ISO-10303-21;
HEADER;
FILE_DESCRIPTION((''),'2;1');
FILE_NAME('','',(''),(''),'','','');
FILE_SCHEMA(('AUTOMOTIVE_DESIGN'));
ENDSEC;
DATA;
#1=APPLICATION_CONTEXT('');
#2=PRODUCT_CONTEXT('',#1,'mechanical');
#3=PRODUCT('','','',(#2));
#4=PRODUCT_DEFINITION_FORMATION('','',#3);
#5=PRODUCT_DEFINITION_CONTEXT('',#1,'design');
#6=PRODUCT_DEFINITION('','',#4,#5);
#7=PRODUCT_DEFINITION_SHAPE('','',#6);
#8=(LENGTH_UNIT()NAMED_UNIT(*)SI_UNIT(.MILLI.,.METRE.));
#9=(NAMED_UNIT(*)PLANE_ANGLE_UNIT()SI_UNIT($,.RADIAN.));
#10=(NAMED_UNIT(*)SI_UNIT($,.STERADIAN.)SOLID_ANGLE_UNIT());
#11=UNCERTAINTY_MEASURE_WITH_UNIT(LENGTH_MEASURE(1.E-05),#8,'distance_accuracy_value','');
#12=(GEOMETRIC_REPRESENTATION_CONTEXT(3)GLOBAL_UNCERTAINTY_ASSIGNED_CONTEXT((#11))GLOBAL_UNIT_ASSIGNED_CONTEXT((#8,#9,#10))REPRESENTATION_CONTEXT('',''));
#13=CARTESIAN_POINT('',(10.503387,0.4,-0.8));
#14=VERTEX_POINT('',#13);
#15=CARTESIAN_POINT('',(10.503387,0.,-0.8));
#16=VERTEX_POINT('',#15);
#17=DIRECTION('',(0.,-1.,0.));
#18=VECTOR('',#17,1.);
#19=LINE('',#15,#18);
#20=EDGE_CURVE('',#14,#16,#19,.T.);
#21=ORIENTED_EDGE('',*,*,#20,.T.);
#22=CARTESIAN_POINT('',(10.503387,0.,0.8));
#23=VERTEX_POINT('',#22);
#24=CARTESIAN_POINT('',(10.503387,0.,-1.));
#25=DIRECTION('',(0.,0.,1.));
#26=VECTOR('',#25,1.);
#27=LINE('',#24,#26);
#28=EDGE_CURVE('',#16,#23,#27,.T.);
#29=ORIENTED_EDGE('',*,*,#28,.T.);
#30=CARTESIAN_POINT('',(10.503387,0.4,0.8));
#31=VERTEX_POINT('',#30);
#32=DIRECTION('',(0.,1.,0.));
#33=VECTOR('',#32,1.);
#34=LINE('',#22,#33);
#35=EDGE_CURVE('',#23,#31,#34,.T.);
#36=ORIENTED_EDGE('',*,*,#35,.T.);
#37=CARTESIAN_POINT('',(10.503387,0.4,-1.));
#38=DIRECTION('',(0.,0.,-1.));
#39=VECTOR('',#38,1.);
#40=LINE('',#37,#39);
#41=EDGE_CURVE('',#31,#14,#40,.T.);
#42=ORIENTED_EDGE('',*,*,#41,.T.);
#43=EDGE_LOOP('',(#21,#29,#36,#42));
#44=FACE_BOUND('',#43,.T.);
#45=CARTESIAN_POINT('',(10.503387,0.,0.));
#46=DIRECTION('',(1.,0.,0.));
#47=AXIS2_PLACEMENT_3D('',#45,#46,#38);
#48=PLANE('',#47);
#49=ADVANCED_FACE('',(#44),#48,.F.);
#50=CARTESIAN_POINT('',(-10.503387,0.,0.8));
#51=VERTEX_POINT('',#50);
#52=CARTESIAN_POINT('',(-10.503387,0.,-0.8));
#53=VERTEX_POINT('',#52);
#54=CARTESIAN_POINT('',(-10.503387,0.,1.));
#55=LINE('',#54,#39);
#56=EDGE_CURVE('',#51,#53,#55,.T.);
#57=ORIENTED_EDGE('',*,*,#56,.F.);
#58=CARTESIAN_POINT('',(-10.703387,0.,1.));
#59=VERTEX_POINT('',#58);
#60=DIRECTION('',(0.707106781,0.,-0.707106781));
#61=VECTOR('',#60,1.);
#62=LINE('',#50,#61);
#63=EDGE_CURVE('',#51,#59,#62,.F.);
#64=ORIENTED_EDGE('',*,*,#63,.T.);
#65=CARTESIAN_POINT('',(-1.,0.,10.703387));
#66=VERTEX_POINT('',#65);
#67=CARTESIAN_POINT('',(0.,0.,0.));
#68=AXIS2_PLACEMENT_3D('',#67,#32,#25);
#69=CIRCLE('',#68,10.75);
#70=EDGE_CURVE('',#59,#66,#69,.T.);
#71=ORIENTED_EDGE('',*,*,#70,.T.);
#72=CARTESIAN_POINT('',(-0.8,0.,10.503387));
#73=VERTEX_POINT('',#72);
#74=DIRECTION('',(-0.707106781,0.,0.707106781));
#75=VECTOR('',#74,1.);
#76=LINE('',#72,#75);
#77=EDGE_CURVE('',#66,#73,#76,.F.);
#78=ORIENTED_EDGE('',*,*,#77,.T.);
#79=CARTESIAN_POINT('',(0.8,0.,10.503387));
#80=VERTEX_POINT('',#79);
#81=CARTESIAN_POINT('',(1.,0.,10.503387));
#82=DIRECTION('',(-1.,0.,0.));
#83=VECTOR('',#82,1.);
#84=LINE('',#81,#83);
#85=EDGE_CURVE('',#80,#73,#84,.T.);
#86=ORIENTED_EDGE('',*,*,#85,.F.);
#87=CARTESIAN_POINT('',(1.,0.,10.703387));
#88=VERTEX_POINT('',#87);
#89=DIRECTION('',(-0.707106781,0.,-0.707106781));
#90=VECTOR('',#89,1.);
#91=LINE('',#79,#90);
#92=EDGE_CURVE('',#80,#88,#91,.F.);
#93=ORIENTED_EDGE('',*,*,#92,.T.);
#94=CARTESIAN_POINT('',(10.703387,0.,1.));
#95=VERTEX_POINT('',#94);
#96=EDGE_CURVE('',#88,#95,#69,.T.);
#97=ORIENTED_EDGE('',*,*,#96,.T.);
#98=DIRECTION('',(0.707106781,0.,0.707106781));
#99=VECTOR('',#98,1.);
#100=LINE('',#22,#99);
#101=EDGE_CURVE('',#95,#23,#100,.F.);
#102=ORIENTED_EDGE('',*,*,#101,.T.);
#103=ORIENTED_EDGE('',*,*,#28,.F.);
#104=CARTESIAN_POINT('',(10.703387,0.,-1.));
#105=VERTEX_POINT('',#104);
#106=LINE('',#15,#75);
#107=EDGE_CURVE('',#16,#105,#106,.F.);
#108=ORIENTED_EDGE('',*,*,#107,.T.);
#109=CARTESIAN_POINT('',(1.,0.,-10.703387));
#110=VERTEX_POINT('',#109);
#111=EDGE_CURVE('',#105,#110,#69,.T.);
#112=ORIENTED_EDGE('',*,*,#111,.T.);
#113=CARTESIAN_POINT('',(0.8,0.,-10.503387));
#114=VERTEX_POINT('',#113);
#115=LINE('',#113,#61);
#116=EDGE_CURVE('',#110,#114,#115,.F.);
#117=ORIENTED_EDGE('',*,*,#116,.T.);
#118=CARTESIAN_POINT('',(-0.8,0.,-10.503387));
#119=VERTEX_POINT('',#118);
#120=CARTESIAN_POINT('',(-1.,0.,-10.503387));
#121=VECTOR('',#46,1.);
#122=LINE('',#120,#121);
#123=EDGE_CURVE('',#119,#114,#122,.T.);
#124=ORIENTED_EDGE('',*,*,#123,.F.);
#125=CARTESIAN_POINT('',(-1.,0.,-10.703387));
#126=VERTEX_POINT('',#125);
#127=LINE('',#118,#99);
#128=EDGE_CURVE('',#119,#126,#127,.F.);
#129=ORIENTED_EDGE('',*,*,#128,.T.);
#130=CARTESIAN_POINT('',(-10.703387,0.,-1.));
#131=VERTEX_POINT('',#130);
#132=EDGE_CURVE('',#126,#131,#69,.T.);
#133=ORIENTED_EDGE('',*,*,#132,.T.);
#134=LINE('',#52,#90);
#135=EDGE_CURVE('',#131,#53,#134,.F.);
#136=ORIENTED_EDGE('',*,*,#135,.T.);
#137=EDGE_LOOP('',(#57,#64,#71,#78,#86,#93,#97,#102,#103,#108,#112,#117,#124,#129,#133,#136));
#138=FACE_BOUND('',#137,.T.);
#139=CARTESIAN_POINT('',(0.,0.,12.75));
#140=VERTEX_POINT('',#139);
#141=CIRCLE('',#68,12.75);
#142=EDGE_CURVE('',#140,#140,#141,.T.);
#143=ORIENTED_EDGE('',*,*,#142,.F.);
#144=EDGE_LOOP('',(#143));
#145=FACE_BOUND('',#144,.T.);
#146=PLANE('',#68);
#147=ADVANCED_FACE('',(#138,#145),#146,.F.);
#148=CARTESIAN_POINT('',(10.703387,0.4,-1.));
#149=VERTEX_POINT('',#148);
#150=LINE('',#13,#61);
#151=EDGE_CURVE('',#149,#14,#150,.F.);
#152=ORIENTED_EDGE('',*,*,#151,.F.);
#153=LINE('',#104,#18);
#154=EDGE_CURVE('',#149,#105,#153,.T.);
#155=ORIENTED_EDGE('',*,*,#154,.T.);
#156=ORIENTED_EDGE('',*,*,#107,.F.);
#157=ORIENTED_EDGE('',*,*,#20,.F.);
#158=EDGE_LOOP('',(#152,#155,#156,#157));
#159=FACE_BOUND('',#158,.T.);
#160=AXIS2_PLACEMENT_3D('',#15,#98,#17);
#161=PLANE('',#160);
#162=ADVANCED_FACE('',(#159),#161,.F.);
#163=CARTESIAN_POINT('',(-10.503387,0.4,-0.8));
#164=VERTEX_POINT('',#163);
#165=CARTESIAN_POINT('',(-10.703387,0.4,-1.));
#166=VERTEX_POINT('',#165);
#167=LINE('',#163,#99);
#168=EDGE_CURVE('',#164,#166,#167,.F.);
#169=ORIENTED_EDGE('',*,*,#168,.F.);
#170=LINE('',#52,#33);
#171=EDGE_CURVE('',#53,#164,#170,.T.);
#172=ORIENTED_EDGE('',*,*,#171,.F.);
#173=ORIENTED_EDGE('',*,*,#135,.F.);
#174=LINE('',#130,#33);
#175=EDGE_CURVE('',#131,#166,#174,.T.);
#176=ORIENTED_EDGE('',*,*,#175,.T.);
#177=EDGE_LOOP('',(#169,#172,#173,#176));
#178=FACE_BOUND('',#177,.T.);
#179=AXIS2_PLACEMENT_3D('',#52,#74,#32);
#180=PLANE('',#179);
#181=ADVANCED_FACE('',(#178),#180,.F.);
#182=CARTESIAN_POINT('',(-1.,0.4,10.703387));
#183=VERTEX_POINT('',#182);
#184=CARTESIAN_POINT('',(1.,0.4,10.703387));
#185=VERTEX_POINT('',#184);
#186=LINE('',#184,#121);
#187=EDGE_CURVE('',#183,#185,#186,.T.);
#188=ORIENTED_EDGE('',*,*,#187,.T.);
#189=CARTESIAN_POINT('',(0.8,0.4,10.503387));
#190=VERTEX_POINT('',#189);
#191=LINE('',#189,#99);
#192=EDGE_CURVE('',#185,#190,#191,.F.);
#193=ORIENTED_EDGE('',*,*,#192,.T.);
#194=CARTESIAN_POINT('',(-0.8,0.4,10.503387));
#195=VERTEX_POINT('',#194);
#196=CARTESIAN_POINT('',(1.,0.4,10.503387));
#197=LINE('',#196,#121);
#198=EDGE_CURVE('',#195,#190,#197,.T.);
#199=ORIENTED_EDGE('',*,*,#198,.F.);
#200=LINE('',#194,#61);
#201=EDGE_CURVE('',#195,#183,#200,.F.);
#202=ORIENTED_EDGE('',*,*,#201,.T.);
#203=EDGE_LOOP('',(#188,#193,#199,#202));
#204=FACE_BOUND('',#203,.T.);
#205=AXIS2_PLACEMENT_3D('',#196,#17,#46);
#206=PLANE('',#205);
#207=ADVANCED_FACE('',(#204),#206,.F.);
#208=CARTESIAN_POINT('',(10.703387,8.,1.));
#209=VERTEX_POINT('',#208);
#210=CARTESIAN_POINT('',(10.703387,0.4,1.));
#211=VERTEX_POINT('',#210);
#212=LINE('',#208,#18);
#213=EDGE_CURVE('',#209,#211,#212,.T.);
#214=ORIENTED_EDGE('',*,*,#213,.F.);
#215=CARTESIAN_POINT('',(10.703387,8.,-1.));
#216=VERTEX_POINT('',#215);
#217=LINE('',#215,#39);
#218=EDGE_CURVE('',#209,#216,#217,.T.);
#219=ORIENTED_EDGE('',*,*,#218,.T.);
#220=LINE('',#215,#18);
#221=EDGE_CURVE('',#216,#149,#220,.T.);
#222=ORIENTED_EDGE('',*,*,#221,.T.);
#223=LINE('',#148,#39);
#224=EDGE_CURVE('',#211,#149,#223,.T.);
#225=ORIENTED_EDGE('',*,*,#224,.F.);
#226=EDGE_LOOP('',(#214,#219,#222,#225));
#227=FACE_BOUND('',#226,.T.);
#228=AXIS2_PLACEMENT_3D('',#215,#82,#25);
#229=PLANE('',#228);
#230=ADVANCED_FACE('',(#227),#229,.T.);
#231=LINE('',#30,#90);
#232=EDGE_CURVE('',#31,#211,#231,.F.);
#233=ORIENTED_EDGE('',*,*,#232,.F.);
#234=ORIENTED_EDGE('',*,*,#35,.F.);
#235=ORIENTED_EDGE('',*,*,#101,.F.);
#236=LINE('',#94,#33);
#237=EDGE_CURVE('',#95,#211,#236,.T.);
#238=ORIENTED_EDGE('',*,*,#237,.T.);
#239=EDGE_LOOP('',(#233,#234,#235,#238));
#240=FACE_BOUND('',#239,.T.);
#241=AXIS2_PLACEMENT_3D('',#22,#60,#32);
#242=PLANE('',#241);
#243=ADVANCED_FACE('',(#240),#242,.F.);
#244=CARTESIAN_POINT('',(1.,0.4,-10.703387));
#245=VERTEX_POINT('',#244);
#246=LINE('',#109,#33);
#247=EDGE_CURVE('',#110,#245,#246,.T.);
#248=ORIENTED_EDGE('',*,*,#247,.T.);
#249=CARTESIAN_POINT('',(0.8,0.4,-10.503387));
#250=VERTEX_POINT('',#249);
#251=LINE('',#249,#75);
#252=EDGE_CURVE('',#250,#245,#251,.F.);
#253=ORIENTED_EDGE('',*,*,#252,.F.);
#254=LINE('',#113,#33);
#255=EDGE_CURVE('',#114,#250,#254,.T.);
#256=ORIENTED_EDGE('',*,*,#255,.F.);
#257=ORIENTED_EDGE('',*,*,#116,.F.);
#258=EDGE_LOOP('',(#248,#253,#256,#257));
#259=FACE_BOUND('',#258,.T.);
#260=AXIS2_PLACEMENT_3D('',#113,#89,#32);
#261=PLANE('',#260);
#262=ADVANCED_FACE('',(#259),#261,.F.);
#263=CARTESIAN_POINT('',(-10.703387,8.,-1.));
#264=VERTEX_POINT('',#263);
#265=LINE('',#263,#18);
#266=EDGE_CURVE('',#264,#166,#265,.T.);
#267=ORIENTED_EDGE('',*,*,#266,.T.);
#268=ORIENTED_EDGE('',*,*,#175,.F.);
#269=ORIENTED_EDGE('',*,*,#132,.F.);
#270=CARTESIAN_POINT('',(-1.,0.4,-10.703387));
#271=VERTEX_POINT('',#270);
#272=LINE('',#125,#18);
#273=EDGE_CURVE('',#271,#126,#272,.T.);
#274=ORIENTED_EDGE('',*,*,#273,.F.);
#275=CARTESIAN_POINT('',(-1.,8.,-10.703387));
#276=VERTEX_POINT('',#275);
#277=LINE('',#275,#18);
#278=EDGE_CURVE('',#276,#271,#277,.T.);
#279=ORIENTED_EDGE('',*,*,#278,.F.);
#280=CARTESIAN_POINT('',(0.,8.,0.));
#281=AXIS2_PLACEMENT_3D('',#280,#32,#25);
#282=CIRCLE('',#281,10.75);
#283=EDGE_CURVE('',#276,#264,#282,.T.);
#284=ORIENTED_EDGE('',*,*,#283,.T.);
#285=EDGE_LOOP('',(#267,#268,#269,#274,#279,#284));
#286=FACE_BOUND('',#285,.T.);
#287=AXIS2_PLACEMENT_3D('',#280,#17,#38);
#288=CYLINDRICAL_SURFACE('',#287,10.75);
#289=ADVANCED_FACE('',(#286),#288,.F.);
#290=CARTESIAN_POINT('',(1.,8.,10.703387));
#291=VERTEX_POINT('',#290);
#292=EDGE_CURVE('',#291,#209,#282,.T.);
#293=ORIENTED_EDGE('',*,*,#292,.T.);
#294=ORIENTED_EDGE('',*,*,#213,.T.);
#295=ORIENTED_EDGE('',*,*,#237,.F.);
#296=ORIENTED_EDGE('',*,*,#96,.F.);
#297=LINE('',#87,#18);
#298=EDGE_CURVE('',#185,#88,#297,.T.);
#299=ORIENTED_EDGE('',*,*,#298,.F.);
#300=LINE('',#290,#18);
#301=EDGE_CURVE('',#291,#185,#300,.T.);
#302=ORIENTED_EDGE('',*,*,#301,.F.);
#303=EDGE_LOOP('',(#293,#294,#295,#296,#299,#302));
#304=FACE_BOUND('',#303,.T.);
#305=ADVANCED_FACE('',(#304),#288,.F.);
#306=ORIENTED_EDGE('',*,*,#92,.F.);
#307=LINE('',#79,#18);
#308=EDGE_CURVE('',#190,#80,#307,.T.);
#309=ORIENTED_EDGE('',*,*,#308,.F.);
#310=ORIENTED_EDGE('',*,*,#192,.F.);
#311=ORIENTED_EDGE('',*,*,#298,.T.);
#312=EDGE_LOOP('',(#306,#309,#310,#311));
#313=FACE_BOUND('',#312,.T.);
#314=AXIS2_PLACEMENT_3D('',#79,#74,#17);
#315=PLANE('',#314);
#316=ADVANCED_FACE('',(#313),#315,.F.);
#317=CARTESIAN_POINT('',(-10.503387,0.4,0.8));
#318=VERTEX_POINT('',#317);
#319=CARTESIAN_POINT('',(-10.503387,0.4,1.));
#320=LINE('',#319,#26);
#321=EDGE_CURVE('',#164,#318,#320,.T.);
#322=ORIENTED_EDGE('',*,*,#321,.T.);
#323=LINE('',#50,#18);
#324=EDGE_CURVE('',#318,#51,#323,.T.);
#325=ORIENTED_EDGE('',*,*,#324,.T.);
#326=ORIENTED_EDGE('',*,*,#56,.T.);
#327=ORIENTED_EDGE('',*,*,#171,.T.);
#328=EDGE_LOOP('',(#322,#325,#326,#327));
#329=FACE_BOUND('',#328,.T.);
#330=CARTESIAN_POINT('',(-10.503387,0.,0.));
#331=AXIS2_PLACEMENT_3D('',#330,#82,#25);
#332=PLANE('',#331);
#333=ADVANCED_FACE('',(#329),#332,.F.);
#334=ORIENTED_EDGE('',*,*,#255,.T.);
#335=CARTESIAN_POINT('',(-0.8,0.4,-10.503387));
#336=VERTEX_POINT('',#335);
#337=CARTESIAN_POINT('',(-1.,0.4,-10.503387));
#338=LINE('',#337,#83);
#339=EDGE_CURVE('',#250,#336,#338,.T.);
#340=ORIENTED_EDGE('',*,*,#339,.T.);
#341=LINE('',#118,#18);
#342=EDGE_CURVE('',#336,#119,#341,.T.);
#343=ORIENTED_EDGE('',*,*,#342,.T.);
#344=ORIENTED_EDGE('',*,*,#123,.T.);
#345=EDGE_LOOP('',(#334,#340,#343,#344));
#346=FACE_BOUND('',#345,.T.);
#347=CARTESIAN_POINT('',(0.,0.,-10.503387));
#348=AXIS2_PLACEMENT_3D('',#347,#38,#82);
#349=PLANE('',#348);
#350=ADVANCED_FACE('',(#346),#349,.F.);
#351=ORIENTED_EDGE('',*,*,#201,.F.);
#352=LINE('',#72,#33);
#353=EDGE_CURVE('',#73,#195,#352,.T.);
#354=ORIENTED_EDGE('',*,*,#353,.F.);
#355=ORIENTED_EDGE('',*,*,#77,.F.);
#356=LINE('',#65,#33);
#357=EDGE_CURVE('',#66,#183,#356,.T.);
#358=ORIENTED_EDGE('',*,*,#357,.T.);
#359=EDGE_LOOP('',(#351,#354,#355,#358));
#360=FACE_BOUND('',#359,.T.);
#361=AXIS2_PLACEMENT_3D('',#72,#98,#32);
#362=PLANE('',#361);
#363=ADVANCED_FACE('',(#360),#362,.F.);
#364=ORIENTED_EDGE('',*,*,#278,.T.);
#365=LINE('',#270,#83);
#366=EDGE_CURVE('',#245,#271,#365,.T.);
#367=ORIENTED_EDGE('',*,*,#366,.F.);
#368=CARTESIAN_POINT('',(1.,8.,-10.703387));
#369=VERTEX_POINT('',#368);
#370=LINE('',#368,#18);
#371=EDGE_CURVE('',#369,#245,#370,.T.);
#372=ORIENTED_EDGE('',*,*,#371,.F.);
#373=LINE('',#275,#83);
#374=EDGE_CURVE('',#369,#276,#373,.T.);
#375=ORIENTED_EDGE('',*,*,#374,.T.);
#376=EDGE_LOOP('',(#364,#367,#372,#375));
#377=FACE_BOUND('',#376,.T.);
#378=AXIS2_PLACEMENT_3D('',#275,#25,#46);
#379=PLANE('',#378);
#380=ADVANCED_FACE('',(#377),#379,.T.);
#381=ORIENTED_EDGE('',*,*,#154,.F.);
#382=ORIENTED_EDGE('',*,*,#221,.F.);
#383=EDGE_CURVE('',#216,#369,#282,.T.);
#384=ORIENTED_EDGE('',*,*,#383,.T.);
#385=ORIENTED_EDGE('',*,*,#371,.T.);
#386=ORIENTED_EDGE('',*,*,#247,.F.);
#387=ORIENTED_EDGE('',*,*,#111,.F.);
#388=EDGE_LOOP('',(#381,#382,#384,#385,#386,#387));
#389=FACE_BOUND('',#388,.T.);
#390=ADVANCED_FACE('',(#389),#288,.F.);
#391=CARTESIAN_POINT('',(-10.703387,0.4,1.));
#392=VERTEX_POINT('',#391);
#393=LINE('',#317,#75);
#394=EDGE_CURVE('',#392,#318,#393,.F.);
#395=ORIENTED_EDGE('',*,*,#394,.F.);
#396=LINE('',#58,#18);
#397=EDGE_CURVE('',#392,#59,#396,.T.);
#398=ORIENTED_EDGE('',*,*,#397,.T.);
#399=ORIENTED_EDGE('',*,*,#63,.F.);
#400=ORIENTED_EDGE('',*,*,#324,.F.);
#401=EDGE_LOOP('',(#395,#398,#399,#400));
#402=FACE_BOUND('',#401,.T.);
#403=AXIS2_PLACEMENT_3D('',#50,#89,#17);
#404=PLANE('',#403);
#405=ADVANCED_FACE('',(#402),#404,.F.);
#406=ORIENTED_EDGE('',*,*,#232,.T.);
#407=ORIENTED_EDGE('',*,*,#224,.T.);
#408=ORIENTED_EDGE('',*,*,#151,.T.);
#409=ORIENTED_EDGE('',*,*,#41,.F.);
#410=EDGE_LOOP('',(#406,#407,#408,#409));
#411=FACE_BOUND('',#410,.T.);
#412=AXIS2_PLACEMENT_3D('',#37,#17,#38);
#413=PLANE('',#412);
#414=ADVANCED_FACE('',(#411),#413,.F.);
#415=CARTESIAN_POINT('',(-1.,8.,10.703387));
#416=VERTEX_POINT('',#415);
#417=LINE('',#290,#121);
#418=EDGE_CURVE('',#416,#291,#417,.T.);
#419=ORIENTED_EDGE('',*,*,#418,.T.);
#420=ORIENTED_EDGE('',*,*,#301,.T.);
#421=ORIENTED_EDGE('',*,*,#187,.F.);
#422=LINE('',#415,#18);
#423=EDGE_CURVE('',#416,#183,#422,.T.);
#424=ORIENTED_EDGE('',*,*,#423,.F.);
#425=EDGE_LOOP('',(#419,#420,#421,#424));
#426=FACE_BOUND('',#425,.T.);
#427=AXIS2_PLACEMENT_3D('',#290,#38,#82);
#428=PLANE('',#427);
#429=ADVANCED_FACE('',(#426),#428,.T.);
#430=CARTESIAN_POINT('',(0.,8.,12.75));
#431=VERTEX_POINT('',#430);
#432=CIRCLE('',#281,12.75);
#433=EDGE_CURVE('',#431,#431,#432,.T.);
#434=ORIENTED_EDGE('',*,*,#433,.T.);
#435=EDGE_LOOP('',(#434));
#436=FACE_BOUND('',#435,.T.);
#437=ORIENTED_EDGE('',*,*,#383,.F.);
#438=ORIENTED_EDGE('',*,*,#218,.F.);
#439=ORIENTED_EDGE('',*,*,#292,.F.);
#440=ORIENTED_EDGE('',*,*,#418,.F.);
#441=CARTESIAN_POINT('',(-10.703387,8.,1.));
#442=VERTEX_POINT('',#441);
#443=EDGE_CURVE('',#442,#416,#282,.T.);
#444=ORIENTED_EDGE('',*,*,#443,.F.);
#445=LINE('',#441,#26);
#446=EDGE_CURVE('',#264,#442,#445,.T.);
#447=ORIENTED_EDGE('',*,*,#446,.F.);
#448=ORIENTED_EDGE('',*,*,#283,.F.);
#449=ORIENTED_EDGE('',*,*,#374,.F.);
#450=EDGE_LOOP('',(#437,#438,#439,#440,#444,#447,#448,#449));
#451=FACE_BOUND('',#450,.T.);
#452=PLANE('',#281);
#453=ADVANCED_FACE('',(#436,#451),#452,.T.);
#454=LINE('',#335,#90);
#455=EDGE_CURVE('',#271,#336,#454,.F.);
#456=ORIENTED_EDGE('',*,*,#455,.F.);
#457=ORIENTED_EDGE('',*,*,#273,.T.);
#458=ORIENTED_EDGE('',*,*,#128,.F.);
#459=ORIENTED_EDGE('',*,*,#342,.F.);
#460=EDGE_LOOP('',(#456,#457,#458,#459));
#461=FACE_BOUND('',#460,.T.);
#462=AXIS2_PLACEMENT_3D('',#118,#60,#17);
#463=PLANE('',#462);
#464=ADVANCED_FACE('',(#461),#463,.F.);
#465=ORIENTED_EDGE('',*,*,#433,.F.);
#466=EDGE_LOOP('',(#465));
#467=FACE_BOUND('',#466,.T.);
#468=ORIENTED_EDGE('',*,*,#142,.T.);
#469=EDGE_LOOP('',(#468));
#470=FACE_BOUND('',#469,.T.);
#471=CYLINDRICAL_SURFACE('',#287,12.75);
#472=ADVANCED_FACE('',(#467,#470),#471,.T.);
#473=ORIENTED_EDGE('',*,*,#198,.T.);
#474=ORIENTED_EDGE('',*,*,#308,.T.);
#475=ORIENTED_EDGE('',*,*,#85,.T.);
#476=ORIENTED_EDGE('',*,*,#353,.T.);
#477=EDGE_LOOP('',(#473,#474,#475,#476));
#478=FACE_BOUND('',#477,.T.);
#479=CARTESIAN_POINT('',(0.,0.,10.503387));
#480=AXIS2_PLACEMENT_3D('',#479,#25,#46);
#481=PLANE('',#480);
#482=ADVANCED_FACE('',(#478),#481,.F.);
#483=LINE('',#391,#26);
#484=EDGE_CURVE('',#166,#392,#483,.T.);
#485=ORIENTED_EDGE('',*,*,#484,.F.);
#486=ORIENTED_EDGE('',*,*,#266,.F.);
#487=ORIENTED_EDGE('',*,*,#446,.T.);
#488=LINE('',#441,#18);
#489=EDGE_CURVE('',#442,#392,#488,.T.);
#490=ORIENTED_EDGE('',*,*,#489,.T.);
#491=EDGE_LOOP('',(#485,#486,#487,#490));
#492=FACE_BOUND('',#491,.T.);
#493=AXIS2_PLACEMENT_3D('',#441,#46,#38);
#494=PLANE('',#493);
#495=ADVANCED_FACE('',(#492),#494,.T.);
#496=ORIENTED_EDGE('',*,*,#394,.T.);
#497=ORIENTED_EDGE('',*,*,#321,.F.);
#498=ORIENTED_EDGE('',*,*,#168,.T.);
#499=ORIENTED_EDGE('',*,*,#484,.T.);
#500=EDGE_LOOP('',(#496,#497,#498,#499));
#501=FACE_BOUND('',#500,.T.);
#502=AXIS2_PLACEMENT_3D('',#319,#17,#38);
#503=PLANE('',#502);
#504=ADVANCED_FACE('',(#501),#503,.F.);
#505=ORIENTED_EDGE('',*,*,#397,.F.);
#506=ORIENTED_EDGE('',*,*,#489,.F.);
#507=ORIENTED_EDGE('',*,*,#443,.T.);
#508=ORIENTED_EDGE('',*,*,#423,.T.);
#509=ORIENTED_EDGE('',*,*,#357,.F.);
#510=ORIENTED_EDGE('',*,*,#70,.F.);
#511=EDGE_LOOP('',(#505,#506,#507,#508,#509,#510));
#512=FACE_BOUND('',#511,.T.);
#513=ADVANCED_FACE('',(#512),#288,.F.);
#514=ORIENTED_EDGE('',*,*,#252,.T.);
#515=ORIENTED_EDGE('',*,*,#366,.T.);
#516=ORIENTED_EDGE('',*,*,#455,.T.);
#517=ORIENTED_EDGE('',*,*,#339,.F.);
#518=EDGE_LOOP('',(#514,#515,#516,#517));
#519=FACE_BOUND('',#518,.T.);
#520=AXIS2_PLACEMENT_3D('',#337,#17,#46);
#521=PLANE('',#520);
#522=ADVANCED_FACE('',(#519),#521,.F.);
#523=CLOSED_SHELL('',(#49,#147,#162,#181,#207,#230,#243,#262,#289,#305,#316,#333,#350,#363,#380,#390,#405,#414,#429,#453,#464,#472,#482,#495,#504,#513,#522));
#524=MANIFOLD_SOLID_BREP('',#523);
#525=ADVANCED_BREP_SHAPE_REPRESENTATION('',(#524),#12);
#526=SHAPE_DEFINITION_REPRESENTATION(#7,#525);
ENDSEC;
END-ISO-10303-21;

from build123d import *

# Parameters (mm, degrees)
SKETCH1_R           = 12.75
BOSS_EXTRUDE1_DEPTH = 8
SKETCH2_W           = 2
SKETCH2_H           = 0.4
BOSS_EXTRUDE2_DEPTH = 0.2
SKETCH3_W           = 2
SKETCH3_H           = 0.4
BOSS_EXTRUDE3_DEPTH = 0.2
SKETCH4_W           = 2
SKETCH4_H           = 0.4
BOSS_EXTRUDE4_DEPTH = 0.2
CHAMFER1_SIZE       = 0.2
SKETCH5_W           = 2
SKETCH5_H           = 0.4
BOSS_EXTRUDE5_DEPTH = 0.2
CHAMFER2_SIZE       = 0.2


with BuildPart() as part:
    # Sketch1 → Boss-Extrude1 (new body)
    with BuildSketch(Plane(origin=(0, 0, 0), x_dir=(1, 0, 0), z_dir=(0, 1, 0))):
        with Locations(Location((0, 0, 0), (0, 0, 270))):
            Circle(SKETCH1_R)
        with BuildLine():
            Line((-1, 10.703387314), (1, 10.703387314))
            ThreePointArc((1, 10.703387314), (7.601397898, 7.601397898), (10.703387314, 1))
            Line((10.703387314, 1), (10.703387314, -1))
            ThreePointArc((10.703387314, -1), (7.601397898, -7.601397898), (1, -10.703387314))
            Line((1, -10.703387314), (-1, -10.703387314))
            ThreePointArc((-1, -10.703387314), (-7.601397898, -7.601397898), (-10.703387314, -1))
            Line((-10.703387314, -1), (-10.703387314, 1))
            ThreePointArc((-10.703387314, 1), (-7.601397898, 7.601397898), (-1, 10.703387314))
        make_face(mode=Mode.SUBTRACT)
    extrude(amount=BOSS_EXTRUDE1_DEPTH)

    # Sketch2 → Boss-Extrude2 (add)
    with BuildSketch(Plane.XY.offset(-10.703387314)):
        with Locations((0, 0.2)):
            Rectangle(SKETCH2_W, SKETCH2_H)
    extrude(amount=BOSS_EXTRUDE2_DEPTH)

    # Sketch3 → Boss-Extrude3 (add)
    with BuildSketch(Plane(origin=(-10.703387314, 0, 0), x_dir=(0, 0, -1), z_dir=(1, 0, 0))):
        with Locations((0, 0.2)):
            Rectangle(SKETCH3_W, SKETCH3_H)
    extrude(amount=BOSS_EXTRUDE3_DEPTH)

    # Sketch4 → Boss-Extrude4 (add)
    with BuildSketch(Plane(origin=(0, 0, 10.703387314), x_dir=(-1, 0, 0), z_dir=(0, 0, -1))):
        with Locations((0, 0.2)):
            Rectangle(SKETCH4_W, SKETCH4_H)
    extrude(amount=BOSS_EXTRUDE4_DEPTH)

    # Chamfer1
    chamfer1_edges = [part.edges().sort_by_distance(p)[0] for p in [
        (1, 0.2, -10.503387314),
        (-1, 0.2, -10.503387314),
        (-10.503387314, 0.2, 1),
        (-10.503387314, 0.2, -1),
        (-1, 0.2, 10.503387314),
        (1, 0.2, 10.503387314),
    ]]
    chamfer(chamfer1_edges, length=CHAMFER1_SIZE - 0.0001)  # a hair under: the kernel refuses the full size

    # Sketch5 → Boss-Extrude5 (add)
    with BuildSketch(Plane.ZY.offset(-10.703387314)):
        with Locations((0, 0.2)):
            Rectangle(SKETCH5_W, SKETCH5_H)
    extrude(amount=BOSS_EXTRUDE5_DEPTH)

    # Chamfer2
    chamfer2_edges = [part.edges().sort_by_distance(p)[0] for p in [
        (10.503387314, 0.2, 1),
        (10.503387314, 0.2, -1),
    ]]
    chamfer(chamfer2_edges, length=CHAMFER2_SIZE - 0.0001)  # a hair under: the kernel refuses the full size


solid = part.part
